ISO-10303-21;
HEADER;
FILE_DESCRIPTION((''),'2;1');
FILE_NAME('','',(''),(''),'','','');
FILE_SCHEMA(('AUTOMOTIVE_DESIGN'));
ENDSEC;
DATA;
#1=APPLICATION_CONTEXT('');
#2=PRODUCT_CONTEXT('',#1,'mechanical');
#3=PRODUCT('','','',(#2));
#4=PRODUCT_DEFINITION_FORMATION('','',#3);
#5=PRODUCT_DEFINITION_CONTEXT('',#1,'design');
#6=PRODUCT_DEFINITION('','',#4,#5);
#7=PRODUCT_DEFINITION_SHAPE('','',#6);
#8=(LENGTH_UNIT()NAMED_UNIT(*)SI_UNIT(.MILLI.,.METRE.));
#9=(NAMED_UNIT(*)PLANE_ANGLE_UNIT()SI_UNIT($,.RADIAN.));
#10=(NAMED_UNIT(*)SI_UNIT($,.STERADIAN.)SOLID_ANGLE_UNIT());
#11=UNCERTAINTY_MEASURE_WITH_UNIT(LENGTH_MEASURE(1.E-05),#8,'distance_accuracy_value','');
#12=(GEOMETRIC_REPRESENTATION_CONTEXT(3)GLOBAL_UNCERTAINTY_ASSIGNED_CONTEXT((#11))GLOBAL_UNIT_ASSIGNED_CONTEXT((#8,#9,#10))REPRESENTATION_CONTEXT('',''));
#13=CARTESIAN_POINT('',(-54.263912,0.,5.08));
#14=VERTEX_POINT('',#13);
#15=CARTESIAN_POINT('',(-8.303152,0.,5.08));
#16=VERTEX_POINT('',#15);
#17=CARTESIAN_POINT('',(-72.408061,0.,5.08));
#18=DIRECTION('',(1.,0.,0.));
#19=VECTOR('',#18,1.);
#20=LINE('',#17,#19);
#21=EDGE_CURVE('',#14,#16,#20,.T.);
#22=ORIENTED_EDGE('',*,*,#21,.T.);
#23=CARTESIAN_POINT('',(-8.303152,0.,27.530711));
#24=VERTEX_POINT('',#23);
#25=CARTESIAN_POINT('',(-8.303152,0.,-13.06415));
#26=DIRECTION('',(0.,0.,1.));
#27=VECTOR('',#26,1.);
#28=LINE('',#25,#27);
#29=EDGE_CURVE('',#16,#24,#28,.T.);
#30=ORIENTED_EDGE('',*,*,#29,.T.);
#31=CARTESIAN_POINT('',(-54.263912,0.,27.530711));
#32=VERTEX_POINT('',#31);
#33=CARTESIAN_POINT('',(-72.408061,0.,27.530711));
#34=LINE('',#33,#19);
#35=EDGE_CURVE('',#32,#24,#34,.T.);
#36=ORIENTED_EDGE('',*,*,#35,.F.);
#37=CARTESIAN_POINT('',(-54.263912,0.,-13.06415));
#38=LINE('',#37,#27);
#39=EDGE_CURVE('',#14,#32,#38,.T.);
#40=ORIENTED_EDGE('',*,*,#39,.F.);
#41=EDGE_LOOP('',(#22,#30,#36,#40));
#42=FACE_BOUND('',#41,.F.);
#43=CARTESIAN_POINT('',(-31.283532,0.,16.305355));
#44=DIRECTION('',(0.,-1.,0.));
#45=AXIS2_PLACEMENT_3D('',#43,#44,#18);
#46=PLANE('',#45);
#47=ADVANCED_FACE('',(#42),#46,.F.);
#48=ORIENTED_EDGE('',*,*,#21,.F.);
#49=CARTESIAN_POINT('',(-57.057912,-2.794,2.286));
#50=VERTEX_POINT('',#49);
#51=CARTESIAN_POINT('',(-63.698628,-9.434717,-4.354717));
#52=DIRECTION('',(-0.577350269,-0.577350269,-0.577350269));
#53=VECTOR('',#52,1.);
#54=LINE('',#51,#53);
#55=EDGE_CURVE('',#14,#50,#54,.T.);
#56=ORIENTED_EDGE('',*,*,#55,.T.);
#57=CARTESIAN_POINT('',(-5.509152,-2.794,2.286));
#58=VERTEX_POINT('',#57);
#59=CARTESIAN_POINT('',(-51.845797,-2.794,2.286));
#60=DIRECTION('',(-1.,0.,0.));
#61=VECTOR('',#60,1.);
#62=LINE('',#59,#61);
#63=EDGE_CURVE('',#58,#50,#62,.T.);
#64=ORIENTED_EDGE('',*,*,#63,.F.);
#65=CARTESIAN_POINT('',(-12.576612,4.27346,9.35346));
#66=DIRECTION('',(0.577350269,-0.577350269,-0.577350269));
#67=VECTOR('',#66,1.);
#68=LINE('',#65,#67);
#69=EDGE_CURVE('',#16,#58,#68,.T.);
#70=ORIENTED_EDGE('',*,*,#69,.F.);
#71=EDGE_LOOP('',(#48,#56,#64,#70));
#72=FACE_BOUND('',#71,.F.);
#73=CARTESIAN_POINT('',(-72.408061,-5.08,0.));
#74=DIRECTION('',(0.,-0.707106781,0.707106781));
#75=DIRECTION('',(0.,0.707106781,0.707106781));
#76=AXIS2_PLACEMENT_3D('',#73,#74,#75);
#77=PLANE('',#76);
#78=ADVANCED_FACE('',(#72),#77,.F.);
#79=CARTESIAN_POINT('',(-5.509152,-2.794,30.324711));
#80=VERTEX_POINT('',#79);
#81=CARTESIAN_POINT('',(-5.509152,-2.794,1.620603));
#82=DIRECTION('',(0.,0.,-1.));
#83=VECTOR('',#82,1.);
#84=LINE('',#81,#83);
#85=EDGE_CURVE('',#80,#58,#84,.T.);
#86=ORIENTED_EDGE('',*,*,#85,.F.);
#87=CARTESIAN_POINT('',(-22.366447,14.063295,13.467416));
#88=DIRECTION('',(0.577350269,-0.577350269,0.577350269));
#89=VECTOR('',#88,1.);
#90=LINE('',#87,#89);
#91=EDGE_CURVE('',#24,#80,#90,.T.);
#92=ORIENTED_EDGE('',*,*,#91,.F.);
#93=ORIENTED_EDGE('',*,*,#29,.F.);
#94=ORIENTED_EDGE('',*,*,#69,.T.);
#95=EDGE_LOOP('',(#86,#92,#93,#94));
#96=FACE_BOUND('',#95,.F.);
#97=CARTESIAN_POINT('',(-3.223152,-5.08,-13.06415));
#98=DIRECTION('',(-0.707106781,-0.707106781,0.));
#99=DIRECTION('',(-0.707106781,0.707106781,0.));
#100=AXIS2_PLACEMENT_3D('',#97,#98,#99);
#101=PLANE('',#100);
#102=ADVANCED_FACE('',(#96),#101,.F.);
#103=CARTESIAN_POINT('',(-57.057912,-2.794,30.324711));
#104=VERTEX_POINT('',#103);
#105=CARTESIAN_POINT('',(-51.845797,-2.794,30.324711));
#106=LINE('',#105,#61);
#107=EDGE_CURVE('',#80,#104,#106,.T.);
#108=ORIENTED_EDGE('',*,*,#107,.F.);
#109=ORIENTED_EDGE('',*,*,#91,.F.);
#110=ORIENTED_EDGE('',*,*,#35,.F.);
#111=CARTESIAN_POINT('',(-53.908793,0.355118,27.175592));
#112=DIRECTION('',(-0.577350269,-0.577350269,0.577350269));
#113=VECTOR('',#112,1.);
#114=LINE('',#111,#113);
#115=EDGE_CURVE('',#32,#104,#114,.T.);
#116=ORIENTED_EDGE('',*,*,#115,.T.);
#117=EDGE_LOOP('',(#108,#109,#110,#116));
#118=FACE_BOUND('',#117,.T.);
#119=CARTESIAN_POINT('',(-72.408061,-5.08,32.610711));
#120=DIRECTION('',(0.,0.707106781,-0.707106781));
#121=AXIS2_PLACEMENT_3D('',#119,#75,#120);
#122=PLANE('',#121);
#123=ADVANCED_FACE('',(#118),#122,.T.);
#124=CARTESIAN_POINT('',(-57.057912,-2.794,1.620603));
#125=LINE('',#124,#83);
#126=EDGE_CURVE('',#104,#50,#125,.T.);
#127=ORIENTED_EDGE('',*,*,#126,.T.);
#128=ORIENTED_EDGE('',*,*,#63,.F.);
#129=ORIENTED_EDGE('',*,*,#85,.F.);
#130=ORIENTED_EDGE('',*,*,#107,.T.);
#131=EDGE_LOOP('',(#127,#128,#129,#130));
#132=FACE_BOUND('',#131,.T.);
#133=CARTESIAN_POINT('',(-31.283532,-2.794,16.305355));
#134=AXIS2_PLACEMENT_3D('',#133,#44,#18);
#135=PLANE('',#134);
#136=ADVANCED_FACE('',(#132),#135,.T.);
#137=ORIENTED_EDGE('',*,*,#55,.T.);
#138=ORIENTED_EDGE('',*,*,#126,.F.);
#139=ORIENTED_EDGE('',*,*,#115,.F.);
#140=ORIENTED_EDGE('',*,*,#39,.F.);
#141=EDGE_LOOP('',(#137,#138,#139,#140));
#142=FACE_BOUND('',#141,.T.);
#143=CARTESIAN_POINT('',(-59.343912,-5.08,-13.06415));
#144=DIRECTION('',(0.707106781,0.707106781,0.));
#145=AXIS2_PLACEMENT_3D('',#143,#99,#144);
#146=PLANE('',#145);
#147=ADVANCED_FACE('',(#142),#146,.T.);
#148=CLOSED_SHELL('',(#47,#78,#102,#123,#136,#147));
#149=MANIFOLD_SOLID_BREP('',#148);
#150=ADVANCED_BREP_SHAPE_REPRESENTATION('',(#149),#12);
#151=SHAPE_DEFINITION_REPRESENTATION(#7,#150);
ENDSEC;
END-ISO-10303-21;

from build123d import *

# Parameters (mm, degrees)
F0_W        = 56.1207598075
F0_H        = 32.6107107103
F1_DEPTH    = 2.794
F2_T1_DEPTH = 82.2490589653
F2_T3_DEPTH = 58.739009868


# Not quite as in the source:
# - a fillet or chamfer that OpenCascade refuses, or shapes differently, is made with other operations: its cross-section is extruded or revolved along the edge and cut away or added


with BuildPart() as f1:
    # F0 (on Front) → F1 (new body)
    with BuildSketch(Plane.XZ):
        with Locations((-31.2835318036, 16.3053553551)):
            Rectangle(F0_W, F0_H)
    extrude(amount=F1_DEPTH)

    # F2: chamfer of 5.08 on 4 edges, made by hand

    # F2_s2 → F2_t1 (cut)
    with BuildSketch(Plane.YZ.offset(-72.4080612863)):
        Polygon((-5.08, 32.6107107103), (0, 27.5307107103), (0, 32.6107107103), align=None)
        Polygon((-5.08, 0), (0, 5.08), (0, 0), align=None)
    extrude(amount=F2_T1_DEPTH, mode=Mode.SUBTRACT)

    # F2_s4 → F2_t3 (cut)
    with BuildSketch(Plane.XY.offset(-13.0641495789)):
        Polygon((-3.2231518999, -5.08), (-8.3031518999, 0), (-3.2231518999, 0), align=None)
        Polygon((-59.3439117074, -5.08), (-54.2639117074, 0), (-59.3439117074, 0), align=None)
    extrude(amount=F2_T3_DEPTH, mode=Mode.SUBTRACT)


solid = f1.part
